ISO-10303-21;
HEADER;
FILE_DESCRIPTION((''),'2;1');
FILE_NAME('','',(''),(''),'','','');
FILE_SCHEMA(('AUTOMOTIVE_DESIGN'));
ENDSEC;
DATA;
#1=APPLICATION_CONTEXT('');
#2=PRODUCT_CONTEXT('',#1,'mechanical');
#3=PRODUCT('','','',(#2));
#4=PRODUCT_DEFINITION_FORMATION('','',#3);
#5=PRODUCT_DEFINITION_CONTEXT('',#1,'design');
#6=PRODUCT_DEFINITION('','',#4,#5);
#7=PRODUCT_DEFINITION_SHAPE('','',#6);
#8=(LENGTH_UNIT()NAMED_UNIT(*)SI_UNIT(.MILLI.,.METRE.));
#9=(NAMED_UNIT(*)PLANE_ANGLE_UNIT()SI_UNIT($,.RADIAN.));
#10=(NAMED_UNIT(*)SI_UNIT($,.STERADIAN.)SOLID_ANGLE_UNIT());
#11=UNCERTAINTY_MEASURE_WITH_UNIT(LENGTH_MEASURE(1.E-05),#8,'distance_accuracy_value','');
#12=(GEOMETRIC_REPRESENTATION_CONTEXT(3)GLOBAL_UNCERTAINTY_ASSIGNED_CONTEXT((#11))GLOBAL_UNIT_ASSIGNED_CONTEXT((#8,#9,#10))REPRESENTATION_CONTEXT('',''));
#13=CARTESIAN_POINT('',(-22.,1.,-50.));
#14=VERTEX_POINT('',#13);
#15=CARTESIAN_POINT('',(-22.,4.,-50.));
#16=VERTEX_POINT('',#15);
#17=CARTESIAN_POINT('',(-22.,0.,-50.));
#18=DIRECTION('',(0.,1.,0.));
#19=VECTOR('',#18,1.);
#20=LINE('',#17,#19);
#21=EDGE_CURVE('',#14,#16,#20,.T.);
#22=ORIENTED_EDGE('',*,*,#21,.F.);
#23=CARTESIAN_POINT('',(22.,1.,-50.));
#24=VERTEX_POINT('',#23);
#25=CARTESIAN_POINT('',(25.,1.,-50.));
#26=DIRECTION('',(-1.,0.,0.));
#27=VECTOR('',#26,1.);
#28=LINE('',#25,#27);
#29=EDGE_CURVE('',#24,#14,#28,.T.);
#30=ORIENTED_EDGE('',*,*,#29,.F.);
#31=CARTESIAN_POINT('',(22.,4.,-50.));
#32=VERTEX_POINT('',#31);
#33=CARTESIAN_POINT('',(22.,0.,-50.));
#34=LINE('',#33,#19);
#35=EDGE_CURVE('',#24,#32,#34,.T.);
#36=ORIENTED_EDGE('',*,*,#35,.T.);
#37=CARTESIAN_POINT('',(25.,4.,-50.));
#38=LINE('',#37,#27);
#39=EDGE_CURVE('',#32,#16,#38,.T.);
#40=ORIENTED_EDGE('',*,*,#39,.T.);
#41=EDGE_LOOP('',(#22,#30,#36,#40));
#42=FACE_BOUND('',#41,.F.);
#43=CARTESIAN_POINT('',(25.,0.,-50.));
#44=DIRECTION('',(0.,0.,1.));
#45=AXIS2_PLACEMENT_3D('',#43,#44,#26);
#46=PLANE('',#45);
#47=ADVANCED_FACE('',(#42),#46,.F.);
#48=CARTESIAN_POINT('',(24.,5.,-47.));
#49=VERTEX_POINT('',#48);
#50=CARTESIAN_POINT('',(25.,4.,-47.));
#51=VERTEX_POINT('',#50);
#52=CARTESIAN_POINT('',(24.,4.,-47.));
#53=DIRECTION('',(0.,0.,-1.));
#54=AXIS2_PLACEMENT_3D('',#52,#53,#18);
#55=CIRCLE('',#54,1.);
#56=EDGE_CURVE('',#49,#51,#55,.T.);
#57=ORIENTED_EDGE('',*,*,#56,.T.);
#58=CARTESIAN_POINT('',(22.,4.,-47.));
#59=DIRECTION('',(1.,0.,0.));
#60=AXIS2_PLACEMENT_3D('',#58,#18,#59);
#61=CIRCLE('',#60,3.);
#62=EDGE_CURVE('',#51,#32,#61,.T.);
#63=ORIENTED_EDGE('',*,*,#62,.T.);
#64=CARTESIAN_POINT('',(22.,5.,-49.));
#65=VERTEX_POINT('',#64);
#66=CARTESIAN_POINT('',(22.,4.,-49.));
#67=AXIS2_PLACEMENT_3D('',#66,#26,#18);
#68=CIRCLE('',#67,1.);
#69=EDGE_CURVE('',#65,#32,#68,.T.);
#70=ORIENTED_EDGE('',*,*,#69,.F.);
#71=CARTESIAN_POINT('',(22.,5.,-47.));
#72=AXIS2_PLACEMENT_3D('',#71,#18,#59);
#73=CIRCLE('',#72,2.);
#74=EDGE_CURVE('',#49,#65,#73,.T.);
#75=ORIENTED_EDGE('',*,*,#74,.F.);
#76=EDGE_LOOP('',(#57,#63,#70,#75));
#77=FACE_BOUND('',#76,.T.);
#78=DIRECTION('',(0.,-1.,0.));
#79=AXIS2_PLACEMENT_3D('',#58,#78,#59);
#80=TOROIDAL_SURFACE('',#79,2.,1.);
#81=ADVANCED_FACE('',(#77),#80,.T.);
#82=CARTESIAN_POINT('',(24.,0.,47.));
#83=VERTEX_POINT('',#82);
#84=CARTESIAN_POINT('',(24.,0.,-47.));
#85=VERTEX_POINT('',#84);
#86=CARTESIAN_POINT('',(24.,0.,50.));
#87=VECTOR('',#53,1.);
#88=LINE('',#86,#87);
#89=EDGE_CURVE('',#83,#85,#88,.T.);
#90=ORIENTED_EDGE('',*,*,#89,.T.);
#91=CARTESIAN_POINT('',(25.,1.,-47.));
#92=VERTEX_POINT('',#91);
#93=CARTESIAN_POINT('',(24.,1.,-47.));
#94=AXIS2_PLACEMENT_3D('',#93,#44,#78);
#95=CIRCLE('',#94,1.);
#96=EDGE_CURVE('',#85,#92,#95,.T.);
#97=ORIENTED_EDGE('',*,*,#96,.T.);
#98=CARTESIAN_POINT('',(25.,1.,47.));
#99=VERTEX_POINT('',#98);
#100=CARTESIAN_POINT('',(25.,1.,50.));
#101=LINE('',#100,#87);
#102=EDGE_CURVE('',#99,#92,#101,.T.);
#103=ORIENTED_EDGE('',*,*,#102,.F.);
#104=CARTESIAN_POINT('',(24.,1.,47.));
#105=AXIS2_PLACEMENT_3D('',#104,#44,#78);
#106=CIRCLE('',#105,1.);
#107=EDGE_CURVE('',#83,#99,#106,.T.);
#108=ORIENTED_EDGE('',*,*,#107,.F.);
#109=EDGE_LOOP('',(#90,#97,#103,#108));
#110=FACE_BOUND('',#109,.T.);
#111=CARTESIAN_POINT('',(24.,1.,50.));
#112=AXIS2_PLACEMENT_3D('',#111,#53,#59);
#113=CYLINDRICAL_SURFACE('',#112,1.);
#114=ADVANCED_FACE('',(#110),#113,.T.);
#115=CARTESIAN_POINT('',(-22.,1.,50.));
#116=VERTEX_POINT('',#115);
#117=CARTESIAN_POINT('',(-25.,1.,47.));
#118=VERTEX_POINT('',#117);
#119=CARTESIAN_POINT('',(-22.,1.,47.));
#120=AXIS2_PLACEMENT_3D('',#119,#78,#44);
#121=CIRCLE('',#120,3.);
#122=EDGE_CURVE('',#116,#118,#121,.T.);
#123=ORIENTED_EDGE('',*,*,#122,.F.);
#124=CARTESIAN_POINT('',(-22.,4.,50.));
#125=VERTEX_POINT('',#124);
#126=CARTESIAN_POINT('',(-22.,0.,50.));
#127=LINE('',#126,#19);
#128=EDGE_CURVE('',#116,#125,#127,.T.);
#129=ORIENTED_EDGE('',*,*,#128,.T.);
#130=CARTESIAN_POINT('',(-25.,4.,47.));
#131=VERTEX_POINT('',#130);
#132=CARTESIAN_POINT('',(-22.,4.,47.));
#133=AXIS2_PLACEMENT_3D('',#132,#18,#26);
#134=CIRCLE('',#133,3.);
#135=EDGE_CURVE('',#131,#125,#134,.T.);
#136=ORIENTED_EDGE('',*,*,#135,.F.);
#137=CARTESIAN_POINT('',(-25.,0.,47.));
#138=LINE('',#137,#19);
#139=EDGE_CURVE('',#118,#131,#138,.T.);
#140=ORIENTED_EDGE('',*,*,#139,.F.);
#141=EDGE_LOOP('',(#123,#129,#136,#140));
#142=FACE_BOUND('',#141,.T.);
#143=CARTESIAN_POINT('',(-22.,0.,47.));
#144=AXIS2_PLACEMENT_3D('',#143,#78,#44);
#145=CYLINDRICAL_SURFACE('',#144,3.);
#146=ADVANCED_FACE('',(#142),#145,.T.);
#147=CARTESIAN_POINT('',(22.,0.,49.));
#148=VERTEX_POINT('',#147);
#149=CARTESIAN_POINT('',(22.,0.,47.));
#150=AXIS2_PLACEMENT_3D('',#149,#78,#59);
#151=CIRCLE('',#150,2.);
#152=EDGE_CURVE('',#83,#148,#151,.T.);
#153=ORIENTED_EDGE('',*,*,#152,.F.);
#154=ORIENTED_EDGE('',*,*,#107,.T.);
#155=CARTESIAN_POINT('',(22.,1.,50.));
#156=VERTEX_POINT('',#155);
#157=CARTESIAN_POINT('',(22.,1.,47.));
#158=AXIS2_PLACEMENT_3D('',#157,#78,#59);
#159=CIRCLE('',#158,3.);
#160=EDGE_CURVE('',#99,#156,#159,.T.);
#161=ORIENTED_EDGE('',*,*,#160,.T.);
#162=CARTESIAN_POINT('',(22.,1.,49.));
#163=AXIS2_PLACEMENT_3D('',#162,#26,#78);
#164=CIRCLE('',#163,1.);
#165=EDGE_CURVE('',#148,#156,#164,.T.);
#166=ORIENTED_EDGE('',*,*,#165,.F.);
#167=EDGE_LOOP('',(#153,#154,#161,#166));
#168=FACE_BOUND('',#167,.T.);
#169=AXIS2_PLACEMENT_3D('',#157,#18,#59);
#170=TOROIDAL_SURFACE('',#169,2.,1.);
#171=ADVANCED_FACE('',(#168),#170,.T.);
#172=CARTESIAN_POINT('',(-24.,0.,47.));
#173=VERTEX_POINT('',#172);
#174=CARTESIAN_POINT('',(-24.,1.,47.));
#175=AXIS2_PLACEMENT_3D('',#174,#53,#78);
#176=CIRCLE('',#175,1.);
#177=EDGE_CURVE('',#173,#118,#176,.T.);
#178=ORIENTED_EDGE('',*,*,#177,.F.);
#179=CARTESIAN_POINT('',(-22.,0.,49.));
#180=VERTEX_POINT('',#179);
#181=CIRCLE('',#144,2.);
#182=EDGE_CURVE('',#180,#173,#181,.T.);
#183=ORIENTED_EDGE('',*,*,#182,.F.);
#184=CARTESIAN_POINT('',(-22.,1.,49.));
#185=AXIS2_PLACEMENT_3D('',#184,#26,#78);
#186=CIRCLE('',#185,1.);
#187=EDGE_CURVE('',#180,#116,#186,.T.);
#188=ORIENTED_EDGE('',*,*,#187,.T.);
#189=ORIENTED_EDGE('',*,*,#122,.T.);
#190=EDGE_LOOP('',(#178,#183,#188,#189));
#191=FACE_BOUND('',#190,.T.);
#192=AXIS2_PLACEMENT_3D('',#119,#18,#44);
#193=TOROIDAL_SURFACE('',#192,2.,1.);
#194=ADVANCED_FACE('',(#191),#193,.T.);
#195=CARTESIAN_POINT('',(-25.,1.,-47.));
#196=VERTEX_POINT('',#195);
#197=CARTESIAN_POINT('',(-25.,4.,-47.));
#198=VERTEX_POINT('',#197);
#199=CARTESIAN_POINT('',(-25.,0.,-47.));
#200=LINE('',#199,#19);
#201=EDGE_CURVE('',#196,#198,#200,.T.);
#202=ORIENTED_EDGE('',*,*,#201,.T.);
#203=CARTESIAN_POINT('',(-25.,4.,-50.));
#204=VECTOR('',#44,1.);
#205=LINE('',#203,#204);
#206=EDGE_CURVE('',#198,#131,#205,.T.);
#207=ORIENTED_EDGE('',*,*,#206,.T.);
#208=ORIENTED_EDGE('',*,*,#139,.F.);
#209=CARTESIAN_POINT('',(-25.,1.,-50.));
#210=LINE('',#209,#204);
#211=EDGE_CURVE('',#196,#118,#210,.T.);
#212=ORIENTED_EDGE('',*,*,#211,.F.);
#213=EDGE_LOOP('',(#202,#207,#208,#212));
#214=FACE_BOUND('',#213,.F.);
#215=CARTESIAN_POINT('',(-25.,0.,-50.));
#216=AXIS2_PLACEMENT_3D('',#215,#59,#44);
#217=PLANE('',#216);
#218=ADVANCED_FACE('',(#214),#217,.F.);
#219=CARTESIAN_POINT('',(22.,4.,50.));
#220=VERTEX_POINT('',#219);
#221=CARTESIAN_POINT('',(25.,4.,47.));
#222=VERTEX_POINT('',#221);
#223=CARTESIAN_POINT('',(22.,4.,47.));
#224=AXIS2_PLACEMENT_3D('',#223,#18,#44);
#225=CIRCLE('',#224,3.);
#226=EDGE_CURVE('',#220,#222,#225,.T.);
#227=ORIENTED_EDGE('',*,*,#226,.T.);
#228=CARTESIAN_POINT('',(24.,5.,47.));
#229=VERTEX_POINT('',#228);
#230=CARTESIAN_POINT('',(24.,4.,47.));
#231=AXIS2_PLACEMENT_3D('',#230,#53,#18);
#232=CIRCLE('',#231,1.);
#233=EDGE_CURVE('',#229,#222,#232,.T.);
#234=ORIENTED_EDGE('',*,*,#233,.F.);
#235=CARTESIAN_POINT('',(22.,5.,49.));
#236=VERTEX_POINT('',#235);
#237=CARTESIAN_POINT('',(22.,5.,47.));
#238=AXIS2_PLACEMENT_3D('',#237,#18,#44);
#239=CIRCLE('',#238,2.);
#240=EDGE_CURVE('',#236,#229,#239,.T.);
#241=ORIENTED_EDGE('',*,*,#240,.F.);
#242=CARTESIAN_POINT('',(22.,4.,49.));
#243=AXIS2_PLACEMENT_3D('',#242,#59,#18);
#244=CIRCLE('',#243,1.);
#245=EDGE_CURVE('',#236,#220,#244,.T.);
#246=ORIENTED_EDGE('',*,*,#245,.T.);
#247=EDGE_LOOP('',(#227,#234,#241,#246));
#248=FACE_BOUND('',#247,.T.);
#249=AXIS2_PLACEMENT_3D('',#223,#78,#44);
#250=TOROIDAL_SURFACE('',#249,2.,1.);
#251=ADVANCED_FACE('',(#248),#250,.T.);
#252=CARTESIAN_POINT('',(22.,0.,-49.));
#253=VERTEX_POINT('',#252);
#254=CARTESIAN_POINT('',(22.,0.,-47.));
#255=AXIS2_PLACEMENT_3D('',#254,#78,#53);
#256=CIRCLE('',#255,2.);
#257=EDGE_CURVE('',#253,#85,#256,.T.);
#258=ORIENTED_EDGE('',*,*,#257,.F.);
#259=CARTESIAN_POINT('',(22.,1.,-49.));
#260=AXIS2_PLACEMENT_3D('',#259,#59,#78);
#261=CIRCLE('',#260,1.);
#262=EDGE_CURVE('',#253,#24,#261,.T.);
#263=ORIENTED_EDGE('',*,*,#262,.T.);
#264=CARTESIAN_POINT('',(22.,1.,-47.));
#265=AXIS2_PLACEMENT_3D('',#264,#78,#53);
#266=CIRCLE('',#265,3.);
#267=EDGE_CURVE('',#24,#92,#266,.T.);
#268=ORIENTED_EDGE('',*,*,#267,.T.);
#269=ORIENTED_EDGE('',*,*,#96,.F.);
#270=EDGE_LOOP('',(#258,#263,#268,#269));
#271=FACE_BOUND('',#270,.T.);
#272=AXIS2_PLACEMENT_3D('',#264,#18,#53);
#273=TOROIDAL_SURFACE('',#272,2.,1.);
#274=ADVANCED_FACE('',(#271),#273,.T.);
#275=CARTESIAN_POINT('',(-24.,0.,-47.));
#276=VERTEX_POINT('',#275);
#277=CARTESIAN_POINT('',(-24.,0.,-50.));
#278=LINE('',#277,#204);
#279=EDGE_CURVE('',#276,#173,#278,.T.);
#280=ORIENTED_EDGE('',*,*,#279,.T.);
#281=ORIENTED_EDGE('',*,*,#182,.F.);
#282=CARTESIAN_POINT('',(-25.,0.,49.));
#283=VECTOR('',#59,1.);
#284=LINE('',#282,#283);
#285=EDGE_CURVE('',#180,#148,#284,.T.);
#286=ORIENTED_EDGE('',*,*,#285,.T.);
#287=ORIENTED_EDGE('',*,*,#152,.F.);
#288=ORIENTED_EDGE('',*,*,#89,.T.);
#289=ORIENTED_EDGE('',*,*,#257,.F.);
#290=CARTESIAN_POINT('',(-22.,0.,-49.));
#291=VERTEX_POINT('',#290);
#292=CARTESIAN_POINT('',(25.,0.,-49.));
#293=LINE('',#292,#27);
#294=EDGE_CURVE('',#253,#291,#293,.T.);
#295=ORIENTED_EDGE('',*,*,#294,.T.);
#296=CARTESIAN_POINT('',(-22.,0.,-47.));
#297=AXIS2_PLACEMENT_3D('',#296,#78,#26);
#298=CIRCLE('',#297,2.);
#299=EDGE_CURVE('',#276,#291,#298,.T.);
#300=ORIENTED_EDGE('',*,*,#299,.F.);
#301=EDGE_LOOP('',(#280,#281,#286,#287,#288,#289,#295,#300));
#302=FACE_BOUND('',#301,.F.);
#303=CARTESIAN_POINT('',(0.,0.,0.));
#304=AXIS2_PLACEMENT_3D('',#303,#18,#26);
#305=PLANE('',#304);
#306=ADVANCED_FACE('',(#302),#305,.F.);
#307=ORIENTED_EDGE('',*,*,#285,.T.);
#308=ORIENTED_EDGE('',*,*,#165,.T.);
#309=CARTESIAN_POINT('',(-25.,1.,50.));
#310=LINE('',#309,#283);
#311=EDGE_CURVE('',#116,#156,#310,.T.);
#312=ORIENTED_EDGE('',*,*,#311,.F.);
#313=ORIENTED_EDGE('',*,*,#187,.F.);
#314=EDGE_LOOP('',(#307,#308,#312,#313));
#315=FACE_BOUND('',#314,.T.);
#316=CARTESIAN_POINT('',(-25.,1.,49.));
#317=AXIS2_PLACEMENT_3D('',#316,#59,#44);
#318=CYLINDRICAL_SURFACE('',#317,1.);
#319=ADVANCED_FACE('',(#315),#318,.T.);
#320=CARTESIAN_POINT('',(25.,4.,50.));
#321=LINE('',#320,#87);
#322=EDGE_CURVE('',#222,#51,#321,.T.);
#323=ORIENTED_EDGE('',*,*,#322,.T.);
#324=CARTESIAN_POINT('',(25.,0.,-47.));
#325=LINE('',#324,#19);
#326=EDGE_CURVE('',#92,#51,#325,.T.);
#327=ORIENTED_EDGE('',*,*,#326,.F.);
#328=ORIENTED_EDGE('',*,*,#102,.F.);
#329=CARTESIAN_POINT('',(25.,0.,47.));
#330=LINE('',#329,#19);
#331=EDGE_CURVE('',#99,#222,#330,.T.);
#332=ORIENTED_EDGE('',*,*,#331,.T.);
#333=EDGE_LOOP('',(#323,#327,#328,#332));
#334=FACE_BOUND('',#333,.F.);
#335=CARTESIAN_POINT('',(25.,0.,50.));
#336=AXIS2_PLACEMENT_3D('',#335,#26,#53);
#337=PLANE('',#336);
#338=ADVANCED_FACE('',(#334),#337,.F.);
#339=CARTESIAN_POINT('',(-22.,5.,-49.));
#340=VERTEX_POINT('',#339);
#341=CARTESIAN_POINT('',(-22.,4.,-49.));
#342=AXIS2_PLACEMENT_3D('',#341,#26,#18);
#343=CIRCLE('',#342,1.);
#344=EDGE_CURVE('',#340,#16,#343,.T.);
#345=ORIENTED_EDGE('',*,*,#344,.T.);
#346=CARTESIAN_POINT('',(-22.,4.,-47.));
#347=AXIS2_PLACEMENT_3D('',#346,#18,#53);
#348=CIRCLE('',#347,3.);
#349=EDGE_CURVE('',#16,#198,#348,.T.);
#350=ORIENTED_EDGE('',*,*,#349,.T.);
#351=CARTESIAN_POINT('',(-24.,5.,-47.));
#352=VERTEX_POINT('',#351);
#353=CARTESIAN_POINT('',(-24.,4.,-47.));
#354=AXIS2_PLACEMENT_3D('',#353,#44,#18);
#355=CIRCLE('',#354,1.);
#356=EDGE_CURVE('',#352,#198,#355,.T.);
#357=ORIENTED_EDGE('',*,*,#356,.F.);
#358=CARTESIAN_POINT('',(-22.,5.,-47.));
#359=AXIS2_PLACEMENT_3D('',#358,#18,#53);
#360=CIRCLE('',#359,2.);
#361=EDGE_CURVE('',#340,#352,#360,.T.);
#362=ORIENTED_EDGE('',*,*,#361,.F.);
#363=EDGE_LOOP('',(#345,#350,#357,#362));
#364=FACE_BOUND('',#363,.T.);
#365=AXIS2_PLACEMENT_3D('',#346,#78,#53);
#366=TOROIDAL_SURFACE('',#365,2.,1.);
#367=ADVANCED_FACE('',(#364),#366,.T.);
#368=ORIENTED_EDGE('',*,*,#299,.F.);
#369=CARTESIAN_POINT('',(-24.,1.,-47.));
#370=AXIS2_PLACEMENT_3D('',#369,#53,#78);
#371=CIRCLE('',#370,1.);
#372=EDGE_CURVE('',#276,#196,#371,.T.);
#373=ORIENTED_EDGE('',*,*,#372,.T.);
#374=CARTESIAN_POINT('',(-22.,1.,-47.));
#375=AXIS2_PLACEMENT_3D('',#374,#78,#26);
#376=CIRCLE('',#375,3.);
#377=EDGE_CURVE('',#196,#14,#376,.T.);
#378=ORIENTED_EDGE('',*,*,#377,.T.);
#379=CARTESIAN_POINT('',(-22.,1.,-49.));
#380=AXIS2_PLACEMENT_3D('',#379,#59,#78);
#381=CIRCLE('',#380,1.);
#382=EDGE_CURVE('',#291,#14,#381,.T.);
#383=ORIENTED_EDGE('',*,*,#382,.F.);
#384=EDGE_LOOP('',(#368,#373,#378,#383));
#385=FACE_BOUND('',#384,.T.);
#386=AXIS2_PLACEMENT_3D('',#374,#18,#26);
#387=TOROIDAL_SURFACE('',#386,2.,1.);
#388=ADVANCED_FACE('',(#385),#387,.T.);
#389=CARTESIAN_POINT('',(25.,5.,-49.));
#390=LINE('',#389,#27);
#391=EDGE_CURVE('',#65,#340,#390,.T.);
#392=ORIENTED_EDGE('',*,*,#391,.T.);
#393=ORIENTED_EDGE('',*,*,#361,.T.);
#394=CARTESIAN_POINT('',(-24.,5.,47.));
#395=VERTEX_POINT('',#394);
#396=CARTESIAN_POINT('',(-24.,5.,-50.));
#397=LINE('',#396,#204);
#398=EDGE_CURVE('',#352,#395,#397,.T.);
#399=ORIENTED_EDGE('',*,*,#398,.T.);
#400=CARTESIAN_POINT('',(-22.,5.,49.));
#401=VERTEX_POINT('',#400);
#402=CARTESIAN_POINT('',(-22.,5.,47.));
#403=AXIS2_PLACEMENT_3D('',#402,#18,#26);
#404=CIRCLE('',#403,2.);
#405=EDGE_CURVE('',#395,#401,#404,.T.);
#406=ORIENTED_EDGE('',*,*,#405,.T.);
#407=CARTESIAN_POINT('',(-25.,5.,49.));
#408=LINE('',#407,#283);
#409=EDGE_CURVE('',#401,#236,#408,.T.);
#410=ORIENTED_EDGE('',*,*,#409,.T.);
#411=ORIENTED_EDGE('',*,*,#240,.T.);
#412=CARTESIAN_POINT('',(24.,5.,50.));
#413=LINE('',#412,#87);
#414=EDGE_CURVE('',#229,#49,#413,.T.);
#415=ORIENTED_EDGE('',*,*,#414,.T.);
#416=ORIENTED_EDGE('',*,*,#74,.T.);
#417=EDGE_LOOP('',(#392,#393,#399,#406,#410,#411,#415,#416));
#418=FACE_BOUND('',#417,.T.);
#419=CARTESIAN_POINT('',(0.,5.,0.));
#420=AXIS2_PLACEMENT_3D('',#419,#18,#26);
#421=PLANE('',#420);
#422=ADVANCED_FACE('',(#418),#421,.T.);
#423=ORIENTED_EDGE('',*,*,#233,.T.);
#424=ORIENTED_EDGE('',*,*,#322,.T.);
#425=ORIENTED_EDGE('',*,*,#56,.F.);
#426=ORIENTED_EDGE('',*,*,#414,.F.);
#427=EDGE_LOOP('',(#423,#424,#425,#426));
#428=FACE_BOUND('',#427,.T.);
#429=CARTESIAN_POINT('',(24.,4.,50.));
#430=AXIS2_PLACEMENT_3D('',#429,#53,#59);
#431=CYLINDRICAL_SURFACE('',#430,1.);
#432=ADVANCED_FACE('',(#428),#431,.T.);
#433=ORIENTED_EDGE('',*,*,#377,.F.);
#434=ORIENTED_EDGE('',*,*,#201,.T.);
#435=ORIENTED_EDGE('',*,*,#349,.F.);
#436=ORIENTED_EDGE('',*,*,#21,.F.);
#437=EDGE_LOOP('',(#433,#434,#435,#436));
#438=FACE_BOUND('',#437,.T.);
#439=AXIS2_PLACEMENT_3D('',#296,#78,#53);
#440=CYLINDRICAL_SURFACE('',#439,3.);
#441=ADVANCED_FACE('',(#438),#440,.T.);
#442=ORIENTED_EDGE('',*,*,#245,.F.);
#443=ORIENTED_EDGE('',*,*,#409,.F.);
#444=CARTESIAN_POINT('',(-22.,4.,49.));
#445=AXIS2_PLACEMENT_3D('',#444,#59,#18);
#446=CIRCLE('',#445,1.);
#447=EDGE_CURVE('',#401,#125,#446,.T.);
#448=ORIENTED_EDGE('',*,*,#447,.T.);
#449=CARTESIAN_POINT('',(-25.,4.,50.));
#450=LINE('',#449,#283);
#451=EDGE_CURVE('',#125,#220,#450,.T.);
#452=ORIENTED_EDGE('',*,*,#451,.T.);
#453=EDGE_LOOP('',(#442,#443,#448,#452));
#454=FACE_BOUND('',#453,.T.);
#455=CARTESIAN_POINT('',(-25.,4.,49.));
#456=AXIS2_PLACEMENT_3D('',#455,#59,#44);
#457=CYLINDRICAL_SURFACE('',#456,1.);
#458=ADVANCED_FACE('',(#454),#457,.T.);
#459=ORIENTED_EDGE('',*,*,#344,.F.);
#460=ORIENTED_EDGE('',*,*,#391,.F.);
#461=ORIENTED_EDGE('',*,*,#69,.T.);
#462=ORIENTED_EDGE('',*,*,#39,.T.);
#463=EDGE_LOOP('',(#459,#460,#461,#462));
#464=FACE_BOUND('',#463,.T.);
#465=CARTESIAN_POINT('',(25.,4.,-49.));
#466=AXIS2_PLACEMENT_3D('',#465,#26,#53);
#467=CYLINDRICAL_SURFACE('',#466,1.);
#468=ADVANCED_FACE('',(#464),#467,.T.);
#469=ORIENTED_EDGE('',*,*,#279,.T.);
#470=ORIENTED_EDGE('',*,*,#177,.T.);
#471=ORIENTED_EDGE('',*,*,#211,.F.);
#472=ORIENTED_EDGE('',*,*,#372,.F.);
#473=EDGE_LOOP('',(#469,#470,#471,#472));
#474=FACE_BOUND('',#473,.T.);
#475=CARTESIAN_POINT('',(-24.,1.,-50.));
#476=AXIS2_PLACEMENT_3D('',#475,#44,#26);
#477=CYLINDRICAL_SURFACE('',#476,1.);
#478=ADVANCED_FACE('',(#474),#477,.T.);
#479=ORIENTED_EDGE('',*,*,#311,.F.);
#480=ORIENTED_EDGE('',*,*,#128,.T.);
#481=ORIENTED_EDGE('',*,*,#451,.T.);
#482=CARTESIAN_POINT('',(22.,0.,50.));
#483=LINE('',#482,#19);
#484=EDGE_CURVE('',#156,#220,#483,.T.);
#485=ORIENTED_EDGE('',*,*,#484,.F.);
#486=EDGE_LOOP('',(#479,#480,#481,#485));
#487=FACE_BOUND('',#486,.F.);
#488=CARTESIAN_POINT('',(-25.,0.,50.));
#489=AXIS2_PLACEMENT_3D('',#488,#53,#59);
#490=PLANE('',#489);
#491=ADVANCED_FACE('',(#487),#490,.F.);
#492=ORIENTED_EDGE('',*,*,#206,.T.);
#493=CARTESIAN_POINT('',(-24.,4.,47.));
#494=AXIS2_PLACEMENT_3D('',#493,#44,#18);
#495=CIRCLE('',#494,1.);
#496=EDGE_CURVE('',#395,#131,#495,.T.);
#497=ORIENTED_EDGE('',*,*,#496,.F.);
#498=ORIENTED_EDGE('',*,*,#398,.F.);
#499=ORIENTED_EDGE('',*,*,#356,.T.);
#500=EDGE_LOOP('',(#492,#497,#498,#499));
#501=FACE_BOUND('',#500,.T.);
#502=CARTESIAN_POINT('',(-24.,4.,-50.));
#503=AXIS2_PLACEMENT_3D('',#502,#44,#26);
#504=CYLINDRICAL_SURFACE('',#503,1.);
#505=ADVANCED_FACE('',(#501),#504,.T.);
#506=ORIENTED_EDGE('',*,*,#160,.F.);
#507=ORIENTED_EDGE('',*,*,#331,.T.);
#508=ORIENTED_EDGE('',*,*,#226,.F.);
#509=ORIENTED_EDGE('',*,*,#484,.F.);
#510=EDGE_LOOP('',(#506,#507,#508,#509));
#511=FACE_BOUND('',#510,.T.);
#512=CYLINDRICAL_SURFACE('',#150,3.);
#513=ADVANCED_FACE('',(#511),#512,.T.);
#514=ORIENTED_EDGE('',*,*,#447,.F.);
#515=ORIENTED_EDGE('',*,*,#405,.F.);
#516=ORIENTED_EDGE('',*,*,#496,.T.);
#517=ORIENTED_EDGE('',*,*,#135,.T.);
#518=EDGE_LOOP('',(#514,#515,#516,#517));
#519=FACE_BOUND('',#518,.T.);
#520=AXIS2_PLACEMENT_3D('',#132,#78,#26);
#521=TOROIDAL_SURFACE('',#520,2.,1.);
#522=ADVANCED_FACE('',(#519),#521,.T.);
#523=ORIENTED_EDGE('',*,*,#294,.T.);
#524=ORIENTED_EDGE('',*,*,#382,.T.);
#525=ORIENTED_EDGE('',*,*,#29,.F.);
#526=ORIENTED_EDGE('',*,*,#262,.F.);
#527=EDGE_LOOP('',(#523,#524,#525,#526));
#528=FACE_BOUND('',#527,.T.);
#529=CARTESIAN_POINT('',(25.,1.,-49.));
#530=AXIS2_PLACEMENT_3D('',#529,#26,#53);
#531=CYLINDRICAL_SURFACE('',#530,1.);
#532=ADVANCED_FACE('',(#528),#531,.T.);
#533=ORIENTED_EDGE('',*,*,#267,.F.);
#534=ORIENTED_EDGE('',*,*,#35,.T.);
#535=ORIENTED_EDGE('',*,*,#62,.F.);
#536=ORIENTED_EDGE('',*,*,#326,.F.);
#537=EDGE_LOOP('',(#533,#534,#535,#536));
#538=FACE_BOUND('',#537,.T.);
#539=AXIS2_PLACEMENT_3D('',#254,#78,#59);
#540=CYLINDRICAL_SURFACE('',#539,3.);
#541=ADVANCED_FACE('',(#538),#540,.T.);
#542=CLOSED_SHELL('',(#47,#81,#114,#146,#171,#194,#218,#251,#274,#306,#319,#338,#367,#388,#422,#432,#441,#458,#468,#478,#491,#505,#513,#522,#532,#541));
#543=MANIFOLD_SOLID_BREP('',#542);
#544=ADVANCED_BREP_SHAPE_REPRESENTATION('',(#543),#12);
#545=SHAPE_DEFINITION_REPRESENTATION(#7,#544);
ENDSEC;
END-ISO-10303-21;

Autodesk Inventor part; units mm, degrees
ref_plane "YZ Plane" through (0, 0, 0) normal (1, 0, 0) x (0, 1, 0)
ref_plane "XZ Plane" through (0, 0, 0) normal (0, 1, 0) x (-1, 0, 0)
ref_plane "XY Plane" through (0, 0, 0) normal (0, 0, 1) x (1, 0, 0)
sketch "Sketch1" plane through (0, 0, 0) normal (0, 1, 0) x (-1, 0, 0)
  line L0 (-25, -50) -> (25, -50)
  line L1 (25, -50) -> (25, 50)
  line L2 (25, 50) -> (-25, 50)
  line L3 (-25, 50) -> (-25, -50)
  line L4 (-25, -50) -> (25, 50) construction
  line L5 (25, -50) -> (-25, 50) construction
  point P0 (0, 0)
  dimension "d0" = 50
  dimension "d1" = 100
extrude "Extrusion1" add sketch "Sketch1" along normal blind 5
fillet "Fillet1" radius 1 8 edges at (0, 5, 50) (0, 0, 50) (0, 5, -50) (0, 0, -50) (25, 5, 0) (25, 0, 0) (-25, 5, 0) (-25, 0, 0)
fillet "Fillet2" radius 3 12 edges at (24.7071, 4.7071, -49.7071) (24.7071, 0.2929, -49.7071) (25, 2.5, -50) (-24.7071, 4.7071, -49.7071) (-24.7071, 0.2929, -49.7071) (-25, 2.5, -50) (-24.7071, 4.7071, 49.7071) (-24.7071, 0.2929, 49.7071) (-25, 2.5, 50) (24.7071, 4.7071, 49.7071) (24.7071, 0.2929, 49.7071) (25, 2.5, 50)
properties part number "battery-5050100_4000" material "PC/ABS Plastic"
